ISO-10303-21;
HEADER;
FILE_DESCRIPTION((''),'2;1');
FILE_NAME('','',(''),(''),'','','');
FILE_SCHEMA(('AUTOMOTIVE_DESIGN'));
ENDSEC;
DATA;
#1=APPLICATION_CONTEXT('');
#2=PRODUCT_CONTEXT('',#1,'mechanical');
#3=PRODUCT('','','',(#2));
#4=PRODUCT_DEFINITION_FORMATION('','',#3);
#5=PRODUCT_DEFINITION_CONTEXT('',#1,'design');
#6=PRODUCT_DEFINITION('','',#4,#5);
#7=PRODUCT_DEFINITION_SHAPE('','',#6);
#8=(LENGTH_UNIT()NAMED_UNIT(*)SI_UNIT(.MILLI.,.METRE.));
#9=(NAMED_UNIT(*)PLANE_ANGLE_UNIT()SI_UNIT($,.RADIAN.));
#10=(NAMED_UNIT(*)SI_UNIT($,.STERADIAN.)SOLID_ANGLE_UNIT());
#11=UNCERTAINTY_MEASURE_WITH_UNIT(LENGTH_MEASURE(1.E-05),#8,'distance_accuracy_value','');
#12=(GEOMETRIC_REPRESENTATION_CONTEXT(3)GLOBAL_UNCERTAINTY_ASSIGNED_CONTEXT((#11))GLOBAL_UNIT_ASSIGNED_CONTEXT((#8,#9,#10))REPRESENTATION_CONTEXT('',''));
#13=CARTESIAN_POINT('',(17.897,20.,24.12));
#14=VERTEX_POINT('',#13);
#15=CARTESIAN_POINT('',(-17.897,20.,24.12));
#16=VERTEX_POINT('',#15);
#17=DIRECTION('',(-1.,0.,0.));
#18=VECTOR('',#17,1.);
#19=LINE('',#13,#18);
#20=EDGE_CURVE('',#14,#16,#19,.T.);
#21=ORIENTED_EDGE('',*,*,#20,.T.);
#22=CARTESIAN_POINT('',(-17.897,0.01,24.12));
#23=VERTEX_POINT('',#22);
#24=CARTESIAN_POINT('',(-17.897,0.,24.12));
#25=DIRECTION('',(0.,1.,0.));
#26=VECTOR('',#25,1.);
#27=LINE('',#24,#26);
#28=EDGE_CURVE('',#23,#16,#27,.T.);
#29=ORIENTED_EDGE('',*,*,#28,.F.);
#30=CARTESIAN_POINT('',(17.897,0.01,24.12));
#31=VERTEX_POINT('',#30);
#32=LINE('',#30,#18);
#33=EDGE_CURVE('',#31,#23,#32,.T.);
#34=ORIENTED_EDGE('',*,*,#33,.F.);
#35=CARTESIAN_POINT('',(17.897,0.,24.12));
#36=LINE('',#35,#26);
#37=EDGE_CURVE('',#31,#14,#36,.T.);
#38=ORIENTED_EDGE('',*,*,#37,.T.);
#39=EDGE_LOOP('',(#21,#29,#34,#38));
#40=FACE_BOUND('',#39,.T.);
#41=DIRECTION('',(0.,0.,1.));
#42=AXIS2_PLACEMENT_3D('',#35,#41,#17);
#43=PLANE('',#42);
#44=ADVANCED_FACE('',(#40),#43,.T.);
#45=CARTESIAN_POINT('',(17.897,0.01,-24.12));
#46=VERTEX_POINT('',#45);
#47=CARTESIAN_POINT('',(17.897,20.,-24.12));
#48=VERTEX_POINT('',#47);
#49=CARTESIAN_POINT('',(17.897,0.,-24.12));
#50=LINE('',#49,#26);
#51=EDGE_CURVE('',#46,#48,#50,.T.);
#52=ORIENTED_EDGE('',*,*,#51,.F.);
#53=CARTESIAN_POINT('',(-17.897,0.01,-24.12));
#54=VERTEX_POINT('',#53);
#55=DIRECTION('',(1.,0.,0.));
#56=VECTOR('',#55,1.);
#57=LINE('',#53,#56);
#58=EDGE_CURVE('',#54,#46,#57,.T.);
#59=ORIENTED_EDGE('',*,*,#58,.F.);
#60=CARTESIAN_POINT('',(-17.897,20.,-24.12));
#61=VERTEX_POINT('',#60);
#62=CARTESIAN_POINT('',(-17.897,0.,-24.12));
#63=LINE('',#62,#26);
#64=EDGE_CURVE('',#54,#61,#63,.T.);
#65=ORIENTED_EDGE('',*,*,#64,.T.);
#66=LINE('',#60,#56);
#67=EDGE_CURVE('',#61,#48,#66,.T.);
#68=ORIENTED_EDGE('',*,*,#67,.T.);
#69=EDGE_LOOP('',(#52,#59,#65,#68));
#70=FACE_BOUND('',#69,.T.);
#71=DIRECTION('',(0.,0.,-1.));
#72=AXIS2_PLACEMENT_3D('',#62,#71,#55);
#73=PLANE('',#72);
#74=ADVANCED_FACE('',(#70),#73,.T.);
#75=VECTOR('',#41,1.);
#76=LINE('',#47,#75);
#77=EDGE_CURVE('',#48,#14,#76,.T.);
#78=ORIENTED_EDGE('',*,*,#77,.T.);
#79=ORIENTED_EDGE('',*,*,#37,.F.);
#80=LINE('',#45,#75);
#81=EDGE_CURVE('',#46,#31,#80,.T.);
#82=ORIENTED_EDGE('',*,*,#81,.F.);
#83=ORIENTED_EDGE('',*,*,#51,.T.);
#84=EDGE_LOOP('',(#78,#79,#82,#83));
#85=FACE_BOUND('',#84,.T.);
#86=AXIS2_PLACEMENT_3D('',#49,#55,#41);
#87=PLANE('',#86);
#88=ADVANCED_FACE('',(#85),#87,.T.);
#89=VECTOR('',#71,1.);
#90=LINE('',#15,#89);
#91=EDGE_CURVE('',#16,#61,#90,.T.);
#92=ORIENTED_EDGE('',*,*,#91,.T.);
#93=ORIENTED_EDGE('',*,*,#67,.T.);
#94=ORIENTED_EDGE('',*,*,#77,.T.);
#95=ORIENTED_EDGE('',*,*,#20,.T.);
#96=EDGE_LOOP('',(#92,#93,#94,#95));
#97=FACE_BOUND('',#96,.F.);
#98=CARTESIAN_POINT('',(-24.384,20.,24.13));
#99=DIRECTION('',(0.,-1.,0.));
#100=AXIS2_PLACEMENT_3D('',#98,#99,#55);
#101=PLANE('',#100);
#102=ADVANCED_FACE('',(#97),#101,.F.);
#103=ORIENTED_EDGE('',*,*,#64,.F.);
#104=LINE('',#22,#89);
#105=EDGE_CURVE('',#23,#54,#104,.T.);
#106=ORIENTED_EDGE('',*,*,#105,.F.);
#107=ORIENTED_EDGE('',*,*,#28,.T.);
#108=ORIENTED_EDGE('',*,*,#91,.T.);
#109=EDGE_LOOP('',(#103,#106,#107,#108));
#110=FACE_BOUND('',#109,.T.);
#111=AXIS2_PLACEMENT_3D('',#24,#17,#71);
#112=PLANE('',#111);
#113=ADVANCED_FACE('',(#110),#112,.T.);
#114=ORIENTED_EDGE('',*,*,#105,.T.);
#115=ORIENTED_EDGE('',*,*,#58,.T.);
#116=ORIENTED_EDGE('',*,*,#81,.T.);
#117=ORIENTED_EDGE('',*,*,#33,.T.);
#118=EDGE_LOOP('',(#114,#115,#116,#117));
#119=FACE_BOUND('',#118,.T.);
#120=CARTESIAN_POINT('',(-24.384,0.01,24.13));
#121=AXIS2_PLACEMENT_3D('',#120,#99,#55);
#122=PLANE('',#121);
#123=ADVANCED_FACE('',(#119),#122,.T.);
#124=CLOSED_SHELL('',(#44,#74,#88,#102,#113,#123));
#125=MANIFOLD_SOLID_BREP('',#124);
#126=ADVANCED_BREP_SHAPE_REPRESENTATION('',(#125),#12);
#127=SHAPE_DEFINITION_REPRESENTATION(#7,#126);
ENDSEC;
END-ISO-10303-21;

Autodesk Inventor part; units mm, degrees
ref_plane "YZ Plane" through (0, 0, 0) normal (1, 0, 0) x (0, 1, 0)
ref_plane "XZ Plane" through (0, 0, 0) normal (0, 1, 0) x (-1, 0, 0)
ref_plane "XY Plane" through (0, 0, 0) normal (0, 0, 1) x (1, 0, 0)
surface "Composite1"
sketch "Sketch1" plane through (-24.384, 0, 24.13) normal (0, -1, 0) x (1, 0, 0)
  line L0 (42.291, -48.26) -> (6.477, -48.26) projected
  line L1 (42.291, 0) -> (6.477, 0)
  line L2 (6.477, 0) -> (6.477, -48.26)
  line L3 (6.477, -48.26) -> (42.291, -48.26)
  line L4 (42.291, -48.26) -> (42.291, 0) construction
  line L5 (42.291, 0) -> (6.477, -48.26) construction
  line L6 (6.477, 0) -> (42.291, -48.26) construction
  line L7 (42.281, -0.01) -> (6.487, -0.01)
  line L8 (6.487, -0.01) -> (6.487, -48.25)
  line L9 (6.487, -48.25) -> (42.281, -48.25)
  line L10 (42.281, -48.25) -> (42.281, -0.01)
  point P0 (24.384, -24.13)
  dimension "d2" = 0.01
extrude "Extrusion1" add sketch "Sketch1" against normal blind 20
sketch "Sketch2" plane through (-24.384, 0, 24.13) normal (0, -1, 0) x (1, 0, 0)
  point P0 (24.384, -24.13)
sketch "Sketch3" plane through (-24.384, 0, 24.13) normal (0, -1, 0) x (1, 0, 0)
  line L0 (6.487, -0.01) -> (6.487, -48.25) projected
  line L1 (6.487, -48.25) -> (42.281, -48.25) projected
  line L2 (42.281, -48.25) -> (42.281, -0.01) projected
  line L3 (42.281, -0.01) -> (6.487, -0.01) projected
  point P0 (24.384, -24.13)
extrude "Extrusion2" cut sketch "Sketch3" against normal blind 0.01
properties part number "COTS_am-0282_MainBreaker" material "Main Breaker Material"
